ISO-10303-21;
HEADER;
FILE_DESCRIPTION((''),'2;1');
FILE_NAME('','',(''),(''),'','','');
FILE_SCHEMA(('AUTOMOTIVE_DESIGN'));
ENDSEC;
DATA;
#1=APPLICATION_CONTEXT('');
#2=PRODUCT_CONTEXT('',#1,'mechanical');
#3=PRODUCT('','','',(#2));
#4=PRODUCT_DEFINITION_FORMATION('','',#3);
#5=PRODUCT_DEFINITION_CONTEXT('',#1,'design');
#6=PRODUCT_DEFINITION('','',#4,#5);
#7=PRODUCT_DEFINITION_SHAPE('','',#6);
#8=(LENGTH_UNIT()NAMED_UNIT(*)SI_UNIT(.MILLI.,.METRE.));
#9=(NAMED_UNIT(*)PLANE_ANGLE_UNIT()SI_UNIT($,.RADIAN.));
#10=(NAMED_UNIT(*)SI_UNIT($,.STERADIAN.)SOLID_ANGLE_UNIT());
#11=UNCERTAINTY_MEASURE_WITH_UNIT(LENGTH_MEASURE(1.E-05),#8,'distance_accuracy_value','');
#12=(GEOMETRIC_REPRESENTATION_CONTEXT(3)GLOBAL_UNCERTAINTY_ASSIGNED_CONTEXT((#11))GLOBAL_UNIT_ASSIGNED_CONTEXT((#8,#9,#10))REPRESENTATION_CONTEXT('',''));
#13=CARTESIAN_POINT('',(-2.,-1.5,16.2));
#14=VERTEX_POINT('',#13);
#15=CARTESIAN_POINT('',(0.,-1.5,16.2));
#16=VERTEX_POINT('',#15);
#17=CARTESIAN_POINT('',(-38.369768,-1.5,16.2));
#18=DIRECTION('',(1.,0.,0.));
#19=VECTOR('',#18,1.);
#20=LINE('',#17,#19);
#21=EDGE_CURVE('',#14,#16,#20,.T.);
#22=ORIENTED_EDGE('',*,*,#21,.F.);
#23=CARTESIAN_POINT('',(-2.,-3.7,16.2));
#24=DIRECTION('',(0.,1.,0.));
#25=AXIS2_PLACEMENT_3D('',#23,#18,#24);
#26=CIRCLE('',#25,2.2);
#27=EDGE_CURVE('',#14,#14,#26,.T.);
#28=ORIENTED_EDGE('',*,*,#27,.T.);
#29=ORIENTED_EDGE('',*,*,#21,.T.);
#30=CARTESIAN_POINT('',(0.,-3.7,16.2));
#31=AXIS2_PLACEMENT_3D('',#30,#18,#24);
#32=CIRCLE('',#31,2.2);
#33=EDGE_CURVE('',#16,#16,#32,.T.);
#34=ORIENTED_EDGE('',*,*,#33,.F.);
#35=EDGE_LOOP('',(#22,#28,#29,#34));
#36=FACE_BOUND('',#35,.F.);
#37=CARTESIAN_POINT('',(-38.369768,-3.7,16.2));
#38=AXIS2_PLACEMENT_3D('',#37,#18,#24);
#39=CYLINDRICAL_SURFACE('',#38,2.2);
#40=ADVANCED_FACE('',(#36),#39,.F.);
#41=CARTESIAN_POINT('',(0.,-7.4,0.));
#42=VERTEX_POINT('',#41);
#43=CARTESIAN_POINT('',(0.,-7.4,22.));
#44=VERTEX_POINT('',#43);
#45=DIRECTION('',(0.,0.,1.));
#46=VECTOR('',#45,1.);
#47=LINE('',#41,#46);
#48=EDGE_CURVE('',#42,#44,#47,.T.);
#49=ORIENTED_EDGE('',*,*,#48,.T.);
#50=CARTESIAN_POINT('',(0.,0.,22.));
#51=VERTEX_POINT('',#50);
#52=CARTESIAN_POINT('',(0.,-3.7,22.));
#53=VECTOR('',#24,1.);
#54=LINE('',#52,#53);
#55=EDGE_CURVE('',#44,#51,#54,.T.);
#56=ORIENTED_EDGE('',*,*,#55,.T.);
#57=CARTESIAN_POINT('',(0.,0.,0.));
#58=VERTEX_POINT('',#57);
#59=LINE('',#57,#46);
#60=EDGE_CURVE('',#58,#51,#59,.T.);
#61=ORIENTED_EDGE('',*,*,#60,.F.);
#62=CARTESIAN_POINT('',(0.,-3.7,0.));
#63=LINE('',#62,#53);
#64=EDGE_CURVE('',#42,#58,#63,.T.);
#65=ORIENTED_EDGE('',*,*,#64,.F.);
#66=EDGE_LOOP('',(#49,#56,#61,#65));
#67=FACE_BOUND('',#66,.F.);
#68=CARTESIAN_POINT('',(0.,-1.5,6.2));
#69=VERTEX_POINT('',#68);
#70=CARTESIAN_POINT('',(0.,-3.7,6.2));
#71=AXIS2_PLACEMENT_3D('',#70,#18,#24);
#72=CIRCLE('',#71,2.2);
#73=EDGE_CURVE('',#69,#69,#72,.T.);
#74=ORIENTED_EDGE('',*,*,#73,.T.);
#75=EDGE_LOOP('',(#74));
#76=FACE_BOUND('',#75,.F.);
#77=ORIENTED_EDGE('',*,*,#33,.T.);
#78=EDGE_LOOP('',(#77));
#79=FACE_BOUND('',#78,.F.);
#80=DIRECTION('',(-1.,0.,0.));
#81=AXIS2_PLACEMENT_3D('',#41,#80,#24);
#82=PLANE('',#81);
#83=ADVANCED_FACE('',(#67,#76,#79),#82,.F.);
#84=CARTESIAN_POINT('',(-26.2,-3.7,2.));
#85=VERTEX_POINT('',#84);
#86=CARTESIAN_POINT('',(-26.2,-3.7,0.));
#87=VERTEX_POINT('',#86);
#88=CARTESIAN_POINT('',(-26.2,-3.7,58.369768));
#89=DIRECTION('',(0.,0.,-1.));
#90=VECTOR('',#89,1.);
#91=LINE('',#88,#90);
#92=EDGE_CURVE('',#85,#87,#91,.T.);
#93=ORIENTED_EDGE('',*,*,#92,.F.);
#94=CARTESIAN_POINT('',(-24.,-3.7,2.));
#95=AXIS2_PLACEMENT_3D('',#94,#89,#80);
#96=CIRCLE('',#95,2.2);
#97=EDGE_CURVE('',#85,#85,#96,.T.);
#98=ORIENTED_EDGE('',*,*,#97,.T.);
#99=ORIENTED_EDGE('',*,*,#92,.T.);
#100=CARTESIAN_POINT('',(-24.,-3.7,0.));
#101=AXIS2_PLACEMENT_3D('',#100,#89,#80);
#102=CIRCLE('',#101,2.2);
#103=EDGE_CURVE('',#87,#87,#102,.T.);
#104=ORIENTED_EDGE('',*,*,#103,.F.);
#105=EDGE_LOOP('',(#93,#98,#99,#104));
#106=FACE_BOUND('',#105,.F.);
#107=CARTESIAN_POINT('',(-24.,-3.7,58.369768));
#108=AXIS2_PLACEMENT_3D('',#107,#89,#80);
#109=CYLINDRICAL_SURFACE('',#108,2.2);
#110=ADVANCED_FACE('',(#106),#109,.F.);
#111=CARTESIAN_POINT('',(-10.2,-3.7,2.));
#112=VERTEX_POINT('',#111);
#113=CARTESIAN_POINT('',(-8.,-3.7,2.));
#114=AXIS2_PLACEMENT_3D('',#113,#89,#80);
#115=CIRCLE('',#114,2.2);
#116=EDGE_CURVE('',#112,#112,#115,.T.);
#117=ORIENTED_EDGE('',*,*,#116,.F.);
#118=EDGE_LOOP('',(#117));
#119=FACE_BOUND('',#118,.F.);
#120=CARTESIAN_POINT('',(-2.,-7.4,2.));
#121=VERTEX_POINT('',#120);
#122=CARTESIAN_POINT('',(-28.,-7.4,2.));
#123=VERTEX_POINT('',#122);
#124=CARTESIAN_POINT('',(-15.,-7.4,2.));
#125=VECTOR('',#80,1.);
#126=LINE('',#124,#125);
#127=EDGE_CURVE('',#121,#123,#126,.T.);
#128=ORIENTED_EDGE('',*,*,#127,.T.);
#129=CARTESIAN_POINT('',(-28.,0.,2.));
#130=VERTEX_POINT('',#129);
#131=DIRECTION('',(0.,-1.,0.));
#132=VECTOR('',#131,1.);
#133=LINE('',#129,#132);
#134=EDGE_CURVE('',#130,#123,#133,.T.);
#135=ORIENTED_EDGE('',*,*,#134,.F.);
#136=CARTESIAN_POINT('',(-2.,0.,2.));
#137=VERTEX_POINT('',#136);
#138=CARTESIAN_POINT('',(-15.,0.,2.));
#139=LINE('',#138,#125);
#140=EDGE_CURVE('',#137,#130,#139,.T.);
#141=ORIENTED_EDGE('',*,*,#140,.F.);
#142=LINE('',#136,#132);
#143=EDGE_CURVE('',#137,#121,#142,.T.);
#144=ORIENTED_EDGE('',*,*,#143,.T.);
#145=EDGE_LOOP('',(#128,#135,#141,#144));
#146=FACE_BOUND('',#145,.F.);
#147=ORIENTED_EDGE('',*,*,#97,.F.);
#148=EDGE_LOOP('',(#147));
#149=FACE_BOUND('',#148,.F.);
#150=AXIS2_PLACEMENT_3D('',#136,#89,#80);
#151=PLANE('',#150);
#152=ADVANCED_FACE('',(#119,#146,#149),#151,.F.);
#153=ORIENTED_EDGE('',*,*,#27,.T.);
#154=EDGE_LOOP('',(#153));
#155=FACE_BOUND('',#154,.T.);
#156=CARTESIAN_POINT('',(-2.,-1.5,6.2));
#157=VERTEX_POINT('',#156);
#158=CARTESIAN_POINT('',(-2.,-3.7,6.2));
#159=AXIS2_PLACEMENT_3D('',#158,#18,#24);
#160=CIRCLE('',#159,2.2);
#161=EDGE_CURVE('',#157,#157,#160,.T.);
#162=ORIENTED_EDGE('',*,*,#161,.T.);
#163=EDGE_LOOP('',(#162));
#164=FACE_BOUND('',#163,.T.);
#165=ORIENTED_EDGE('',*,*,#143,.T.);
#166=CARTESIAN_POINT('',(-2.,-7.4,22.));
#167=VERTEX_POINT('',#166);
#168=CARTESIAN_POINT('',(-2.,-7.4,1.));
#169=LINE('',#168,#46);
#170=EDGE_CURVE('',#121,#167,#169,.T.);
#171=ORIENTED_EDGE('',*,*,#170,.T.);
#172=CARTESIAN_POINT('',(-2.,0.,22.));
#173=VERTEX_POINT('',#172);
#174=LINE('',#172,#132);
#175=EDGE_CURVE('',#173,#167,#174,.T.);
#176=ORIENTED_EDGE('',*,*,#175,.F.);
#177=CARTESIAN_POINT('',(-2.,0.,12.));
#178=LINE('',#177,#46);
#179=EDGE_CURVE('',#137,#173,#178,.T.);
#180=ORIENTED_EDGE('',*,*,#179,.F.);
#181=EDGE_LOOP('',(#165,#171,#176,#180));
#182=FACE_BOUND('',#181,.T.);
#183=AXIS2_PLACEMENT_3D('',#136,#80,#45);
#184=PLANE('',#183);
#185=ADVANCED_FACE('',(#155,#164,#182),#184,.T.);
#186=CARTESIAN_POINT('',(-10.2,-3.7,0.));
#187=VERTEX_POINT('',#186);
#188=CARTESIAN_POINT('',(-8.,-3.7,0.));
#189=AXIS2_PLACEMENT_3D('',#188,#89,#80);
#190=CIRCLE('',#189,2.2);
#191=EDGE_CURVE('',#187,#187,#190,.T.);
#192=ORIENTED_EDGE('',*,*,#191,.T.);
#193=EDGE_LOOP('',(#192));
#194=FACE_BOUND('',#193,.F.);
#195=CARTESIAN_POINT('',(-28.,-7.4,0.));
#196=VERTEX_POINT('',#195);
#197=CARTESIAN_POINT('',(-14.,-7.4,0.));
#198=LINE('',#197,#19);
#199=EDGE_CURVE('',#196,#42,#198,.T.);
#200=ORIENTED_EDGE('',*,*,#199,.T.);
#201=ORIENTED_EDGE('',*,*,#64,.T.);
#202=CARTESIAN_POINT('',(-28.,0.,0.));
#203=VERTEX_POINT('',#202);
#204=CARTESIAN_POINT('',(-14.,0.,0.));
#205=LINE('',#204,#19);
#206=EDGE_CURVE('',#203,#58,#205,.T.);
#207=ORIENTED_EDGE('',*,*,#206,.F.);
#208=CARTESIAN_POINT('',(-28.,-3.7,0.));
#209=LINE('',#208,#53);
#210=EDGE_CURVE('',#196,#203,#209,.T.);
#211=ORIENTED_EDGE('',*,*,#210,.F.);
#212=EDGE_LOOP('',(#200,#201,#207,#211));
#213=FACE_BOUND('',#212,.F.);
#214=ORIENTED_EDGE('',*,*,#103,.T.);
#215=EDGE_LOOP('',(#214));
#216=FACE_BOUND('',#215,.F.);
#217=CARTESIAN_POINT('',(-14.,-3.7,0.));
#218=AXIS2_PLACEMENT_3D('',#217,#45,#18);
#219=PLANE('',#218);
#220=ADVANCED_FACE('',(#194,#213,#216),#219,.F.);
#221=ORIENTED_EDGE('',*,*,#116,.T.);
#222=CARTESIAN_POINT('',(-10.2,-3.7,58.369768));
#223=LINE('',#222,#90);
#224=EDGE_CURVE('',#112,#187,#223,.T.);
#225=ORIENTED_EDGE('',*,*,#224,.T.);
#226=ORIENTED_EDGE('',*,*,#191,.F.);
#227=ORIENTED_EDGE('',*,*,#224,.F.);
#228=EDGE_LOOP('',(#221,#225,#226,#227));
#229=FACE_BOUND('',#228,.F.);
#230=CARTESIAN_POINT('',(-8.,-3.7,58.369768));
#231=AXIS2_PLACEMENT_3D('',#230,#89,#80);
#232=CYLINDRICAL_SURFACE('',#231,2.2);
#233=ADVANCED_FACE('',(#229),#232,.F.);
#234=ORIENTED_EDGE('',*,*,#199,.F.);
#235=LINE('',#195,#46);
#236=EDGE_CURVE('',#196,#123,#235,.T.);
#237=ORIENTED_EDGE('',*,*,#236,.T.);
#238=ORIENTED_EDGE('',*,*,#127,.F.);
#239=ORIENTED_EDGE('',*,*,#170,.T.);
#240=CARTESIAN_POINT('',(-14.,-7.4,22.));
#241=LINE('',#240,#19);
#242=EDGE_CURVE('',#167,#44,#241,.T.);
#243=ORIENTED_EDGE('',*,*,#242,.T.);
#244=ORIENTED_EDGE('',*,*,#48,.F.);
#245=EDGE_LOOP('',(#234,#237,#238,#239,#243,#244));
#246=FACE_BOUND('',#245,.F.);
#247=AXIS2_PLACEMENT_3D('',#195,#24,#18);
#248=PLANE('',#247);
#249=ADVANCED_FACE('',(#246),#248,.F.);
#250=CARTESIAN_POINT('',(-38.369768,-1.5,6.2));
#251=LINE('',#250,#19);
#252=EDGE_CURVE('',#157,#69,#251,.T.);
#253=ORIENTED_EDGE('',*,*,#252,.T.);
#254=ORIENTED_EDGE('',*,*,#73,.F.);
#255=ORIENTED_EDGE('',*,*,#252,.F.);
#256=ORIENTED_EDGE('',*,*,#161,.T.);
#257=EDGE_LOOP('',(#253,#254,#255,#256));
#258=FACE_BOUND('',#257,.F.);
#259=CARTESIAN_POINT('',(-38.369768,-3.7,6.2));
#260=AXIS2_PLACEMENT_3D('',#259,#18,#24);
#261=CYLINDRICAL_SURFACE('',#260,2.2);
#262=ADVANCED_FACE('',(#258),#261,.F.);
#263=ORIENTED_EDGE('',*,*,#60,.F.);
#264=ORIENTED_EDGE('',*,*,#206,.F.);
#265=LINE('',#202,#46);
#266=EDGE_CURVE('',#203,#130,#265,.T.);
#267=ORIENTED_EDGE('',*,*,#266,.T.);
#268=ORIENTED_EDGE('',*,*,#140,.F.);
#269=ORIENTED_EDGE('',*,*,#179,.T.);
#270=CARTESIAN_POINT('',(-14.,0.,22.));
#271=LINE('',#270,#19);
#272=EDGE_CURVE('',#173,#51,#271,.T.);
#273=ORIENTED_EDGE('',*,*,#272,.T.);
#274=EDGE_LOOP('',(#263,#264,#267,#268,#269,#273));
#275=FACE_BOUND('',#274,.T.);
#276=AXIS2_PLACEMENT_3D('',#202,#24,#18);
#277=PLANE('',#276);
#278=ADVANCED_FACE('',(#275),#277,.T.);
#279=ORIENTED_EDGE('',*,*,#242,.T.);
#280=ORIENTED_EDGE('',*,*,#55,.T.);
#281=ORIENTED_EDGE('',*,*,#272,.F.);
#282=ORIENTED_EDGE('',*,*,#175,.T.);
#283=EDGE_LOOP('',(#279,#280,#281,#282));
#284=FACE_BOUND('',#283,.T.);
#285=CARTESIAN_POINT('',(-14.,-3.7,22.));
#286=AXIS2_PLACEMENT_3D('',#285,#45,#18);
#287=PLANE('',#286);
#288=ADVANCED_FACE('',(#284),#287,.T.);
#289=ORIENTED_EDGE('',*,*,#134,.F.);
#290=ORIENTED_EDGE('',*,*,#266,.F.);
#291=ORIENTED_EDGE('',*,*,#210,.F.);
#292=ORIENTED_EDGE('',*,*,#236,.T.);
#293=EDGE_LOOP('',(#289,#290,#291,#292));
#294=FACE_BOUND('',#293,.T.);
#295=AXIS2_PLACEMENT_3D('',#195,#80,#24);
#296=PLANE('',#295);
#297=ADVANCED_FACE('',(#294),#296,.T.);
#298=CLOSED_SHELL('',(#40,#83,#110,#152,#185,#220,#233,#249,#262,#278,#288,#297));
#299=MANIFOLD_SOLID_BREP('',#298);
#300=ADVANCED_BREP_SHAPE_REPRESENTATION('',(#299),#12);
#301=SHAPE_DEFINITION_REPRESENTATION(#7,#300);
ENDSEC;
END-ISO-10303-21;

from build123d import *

# Parameters (mm, degrees)
F0_W     = 28
F0_H     = 7.4
F1_DEPTH = 22
F3_D     = 4.4
F4_W     = 26
F4_H     = 20
F5_DEPTH = 25
F7_D     = 4.4


# Not quite as in the source:
# - a feature of the source that left no trace in its solid (it failed there, or was rolled back) is left out
# - a feature names something its author has since deleted; it is built from what else it names


with BuildPart() as f1:
    # F0 (on Top) → F1 (new body)
    with BuildSketch(Plane.XY):
        with Locations((-14, -3.7)):
            Rectangle(F0_W, F0_H)
    extrude(amount=F1_DEPTH)

    # F3 (through all)
    with Locations(Plane.XY.offset(22)):
        with Locations((-24, -3.7), (-8, -3.7)):
            Hole(F3_D / 2)

    # F4 (on face) → F5 (cut)
    with BuildSketch(Plane(origin=(0, 0, 0), x_dir=(-1, 0, 0), z_dir=(0, 1, 0))):
        with Locations((15, 12)):
            Rectangle(F4_W, F4_H)
    extrude(amount=-F5_DEPTH, mode=Mode.SUBTRACT)

    # F7 (through all)
    with Locations(Plane(origin=(-2, 0, 0), x_dir=(0, -1, 0), z_dir=(-1, 0, 0))):
        with Locations((3.7, 16.2), (3.7, 6.2)):
            Hole(F7_D / 2)


solid = f1.part
